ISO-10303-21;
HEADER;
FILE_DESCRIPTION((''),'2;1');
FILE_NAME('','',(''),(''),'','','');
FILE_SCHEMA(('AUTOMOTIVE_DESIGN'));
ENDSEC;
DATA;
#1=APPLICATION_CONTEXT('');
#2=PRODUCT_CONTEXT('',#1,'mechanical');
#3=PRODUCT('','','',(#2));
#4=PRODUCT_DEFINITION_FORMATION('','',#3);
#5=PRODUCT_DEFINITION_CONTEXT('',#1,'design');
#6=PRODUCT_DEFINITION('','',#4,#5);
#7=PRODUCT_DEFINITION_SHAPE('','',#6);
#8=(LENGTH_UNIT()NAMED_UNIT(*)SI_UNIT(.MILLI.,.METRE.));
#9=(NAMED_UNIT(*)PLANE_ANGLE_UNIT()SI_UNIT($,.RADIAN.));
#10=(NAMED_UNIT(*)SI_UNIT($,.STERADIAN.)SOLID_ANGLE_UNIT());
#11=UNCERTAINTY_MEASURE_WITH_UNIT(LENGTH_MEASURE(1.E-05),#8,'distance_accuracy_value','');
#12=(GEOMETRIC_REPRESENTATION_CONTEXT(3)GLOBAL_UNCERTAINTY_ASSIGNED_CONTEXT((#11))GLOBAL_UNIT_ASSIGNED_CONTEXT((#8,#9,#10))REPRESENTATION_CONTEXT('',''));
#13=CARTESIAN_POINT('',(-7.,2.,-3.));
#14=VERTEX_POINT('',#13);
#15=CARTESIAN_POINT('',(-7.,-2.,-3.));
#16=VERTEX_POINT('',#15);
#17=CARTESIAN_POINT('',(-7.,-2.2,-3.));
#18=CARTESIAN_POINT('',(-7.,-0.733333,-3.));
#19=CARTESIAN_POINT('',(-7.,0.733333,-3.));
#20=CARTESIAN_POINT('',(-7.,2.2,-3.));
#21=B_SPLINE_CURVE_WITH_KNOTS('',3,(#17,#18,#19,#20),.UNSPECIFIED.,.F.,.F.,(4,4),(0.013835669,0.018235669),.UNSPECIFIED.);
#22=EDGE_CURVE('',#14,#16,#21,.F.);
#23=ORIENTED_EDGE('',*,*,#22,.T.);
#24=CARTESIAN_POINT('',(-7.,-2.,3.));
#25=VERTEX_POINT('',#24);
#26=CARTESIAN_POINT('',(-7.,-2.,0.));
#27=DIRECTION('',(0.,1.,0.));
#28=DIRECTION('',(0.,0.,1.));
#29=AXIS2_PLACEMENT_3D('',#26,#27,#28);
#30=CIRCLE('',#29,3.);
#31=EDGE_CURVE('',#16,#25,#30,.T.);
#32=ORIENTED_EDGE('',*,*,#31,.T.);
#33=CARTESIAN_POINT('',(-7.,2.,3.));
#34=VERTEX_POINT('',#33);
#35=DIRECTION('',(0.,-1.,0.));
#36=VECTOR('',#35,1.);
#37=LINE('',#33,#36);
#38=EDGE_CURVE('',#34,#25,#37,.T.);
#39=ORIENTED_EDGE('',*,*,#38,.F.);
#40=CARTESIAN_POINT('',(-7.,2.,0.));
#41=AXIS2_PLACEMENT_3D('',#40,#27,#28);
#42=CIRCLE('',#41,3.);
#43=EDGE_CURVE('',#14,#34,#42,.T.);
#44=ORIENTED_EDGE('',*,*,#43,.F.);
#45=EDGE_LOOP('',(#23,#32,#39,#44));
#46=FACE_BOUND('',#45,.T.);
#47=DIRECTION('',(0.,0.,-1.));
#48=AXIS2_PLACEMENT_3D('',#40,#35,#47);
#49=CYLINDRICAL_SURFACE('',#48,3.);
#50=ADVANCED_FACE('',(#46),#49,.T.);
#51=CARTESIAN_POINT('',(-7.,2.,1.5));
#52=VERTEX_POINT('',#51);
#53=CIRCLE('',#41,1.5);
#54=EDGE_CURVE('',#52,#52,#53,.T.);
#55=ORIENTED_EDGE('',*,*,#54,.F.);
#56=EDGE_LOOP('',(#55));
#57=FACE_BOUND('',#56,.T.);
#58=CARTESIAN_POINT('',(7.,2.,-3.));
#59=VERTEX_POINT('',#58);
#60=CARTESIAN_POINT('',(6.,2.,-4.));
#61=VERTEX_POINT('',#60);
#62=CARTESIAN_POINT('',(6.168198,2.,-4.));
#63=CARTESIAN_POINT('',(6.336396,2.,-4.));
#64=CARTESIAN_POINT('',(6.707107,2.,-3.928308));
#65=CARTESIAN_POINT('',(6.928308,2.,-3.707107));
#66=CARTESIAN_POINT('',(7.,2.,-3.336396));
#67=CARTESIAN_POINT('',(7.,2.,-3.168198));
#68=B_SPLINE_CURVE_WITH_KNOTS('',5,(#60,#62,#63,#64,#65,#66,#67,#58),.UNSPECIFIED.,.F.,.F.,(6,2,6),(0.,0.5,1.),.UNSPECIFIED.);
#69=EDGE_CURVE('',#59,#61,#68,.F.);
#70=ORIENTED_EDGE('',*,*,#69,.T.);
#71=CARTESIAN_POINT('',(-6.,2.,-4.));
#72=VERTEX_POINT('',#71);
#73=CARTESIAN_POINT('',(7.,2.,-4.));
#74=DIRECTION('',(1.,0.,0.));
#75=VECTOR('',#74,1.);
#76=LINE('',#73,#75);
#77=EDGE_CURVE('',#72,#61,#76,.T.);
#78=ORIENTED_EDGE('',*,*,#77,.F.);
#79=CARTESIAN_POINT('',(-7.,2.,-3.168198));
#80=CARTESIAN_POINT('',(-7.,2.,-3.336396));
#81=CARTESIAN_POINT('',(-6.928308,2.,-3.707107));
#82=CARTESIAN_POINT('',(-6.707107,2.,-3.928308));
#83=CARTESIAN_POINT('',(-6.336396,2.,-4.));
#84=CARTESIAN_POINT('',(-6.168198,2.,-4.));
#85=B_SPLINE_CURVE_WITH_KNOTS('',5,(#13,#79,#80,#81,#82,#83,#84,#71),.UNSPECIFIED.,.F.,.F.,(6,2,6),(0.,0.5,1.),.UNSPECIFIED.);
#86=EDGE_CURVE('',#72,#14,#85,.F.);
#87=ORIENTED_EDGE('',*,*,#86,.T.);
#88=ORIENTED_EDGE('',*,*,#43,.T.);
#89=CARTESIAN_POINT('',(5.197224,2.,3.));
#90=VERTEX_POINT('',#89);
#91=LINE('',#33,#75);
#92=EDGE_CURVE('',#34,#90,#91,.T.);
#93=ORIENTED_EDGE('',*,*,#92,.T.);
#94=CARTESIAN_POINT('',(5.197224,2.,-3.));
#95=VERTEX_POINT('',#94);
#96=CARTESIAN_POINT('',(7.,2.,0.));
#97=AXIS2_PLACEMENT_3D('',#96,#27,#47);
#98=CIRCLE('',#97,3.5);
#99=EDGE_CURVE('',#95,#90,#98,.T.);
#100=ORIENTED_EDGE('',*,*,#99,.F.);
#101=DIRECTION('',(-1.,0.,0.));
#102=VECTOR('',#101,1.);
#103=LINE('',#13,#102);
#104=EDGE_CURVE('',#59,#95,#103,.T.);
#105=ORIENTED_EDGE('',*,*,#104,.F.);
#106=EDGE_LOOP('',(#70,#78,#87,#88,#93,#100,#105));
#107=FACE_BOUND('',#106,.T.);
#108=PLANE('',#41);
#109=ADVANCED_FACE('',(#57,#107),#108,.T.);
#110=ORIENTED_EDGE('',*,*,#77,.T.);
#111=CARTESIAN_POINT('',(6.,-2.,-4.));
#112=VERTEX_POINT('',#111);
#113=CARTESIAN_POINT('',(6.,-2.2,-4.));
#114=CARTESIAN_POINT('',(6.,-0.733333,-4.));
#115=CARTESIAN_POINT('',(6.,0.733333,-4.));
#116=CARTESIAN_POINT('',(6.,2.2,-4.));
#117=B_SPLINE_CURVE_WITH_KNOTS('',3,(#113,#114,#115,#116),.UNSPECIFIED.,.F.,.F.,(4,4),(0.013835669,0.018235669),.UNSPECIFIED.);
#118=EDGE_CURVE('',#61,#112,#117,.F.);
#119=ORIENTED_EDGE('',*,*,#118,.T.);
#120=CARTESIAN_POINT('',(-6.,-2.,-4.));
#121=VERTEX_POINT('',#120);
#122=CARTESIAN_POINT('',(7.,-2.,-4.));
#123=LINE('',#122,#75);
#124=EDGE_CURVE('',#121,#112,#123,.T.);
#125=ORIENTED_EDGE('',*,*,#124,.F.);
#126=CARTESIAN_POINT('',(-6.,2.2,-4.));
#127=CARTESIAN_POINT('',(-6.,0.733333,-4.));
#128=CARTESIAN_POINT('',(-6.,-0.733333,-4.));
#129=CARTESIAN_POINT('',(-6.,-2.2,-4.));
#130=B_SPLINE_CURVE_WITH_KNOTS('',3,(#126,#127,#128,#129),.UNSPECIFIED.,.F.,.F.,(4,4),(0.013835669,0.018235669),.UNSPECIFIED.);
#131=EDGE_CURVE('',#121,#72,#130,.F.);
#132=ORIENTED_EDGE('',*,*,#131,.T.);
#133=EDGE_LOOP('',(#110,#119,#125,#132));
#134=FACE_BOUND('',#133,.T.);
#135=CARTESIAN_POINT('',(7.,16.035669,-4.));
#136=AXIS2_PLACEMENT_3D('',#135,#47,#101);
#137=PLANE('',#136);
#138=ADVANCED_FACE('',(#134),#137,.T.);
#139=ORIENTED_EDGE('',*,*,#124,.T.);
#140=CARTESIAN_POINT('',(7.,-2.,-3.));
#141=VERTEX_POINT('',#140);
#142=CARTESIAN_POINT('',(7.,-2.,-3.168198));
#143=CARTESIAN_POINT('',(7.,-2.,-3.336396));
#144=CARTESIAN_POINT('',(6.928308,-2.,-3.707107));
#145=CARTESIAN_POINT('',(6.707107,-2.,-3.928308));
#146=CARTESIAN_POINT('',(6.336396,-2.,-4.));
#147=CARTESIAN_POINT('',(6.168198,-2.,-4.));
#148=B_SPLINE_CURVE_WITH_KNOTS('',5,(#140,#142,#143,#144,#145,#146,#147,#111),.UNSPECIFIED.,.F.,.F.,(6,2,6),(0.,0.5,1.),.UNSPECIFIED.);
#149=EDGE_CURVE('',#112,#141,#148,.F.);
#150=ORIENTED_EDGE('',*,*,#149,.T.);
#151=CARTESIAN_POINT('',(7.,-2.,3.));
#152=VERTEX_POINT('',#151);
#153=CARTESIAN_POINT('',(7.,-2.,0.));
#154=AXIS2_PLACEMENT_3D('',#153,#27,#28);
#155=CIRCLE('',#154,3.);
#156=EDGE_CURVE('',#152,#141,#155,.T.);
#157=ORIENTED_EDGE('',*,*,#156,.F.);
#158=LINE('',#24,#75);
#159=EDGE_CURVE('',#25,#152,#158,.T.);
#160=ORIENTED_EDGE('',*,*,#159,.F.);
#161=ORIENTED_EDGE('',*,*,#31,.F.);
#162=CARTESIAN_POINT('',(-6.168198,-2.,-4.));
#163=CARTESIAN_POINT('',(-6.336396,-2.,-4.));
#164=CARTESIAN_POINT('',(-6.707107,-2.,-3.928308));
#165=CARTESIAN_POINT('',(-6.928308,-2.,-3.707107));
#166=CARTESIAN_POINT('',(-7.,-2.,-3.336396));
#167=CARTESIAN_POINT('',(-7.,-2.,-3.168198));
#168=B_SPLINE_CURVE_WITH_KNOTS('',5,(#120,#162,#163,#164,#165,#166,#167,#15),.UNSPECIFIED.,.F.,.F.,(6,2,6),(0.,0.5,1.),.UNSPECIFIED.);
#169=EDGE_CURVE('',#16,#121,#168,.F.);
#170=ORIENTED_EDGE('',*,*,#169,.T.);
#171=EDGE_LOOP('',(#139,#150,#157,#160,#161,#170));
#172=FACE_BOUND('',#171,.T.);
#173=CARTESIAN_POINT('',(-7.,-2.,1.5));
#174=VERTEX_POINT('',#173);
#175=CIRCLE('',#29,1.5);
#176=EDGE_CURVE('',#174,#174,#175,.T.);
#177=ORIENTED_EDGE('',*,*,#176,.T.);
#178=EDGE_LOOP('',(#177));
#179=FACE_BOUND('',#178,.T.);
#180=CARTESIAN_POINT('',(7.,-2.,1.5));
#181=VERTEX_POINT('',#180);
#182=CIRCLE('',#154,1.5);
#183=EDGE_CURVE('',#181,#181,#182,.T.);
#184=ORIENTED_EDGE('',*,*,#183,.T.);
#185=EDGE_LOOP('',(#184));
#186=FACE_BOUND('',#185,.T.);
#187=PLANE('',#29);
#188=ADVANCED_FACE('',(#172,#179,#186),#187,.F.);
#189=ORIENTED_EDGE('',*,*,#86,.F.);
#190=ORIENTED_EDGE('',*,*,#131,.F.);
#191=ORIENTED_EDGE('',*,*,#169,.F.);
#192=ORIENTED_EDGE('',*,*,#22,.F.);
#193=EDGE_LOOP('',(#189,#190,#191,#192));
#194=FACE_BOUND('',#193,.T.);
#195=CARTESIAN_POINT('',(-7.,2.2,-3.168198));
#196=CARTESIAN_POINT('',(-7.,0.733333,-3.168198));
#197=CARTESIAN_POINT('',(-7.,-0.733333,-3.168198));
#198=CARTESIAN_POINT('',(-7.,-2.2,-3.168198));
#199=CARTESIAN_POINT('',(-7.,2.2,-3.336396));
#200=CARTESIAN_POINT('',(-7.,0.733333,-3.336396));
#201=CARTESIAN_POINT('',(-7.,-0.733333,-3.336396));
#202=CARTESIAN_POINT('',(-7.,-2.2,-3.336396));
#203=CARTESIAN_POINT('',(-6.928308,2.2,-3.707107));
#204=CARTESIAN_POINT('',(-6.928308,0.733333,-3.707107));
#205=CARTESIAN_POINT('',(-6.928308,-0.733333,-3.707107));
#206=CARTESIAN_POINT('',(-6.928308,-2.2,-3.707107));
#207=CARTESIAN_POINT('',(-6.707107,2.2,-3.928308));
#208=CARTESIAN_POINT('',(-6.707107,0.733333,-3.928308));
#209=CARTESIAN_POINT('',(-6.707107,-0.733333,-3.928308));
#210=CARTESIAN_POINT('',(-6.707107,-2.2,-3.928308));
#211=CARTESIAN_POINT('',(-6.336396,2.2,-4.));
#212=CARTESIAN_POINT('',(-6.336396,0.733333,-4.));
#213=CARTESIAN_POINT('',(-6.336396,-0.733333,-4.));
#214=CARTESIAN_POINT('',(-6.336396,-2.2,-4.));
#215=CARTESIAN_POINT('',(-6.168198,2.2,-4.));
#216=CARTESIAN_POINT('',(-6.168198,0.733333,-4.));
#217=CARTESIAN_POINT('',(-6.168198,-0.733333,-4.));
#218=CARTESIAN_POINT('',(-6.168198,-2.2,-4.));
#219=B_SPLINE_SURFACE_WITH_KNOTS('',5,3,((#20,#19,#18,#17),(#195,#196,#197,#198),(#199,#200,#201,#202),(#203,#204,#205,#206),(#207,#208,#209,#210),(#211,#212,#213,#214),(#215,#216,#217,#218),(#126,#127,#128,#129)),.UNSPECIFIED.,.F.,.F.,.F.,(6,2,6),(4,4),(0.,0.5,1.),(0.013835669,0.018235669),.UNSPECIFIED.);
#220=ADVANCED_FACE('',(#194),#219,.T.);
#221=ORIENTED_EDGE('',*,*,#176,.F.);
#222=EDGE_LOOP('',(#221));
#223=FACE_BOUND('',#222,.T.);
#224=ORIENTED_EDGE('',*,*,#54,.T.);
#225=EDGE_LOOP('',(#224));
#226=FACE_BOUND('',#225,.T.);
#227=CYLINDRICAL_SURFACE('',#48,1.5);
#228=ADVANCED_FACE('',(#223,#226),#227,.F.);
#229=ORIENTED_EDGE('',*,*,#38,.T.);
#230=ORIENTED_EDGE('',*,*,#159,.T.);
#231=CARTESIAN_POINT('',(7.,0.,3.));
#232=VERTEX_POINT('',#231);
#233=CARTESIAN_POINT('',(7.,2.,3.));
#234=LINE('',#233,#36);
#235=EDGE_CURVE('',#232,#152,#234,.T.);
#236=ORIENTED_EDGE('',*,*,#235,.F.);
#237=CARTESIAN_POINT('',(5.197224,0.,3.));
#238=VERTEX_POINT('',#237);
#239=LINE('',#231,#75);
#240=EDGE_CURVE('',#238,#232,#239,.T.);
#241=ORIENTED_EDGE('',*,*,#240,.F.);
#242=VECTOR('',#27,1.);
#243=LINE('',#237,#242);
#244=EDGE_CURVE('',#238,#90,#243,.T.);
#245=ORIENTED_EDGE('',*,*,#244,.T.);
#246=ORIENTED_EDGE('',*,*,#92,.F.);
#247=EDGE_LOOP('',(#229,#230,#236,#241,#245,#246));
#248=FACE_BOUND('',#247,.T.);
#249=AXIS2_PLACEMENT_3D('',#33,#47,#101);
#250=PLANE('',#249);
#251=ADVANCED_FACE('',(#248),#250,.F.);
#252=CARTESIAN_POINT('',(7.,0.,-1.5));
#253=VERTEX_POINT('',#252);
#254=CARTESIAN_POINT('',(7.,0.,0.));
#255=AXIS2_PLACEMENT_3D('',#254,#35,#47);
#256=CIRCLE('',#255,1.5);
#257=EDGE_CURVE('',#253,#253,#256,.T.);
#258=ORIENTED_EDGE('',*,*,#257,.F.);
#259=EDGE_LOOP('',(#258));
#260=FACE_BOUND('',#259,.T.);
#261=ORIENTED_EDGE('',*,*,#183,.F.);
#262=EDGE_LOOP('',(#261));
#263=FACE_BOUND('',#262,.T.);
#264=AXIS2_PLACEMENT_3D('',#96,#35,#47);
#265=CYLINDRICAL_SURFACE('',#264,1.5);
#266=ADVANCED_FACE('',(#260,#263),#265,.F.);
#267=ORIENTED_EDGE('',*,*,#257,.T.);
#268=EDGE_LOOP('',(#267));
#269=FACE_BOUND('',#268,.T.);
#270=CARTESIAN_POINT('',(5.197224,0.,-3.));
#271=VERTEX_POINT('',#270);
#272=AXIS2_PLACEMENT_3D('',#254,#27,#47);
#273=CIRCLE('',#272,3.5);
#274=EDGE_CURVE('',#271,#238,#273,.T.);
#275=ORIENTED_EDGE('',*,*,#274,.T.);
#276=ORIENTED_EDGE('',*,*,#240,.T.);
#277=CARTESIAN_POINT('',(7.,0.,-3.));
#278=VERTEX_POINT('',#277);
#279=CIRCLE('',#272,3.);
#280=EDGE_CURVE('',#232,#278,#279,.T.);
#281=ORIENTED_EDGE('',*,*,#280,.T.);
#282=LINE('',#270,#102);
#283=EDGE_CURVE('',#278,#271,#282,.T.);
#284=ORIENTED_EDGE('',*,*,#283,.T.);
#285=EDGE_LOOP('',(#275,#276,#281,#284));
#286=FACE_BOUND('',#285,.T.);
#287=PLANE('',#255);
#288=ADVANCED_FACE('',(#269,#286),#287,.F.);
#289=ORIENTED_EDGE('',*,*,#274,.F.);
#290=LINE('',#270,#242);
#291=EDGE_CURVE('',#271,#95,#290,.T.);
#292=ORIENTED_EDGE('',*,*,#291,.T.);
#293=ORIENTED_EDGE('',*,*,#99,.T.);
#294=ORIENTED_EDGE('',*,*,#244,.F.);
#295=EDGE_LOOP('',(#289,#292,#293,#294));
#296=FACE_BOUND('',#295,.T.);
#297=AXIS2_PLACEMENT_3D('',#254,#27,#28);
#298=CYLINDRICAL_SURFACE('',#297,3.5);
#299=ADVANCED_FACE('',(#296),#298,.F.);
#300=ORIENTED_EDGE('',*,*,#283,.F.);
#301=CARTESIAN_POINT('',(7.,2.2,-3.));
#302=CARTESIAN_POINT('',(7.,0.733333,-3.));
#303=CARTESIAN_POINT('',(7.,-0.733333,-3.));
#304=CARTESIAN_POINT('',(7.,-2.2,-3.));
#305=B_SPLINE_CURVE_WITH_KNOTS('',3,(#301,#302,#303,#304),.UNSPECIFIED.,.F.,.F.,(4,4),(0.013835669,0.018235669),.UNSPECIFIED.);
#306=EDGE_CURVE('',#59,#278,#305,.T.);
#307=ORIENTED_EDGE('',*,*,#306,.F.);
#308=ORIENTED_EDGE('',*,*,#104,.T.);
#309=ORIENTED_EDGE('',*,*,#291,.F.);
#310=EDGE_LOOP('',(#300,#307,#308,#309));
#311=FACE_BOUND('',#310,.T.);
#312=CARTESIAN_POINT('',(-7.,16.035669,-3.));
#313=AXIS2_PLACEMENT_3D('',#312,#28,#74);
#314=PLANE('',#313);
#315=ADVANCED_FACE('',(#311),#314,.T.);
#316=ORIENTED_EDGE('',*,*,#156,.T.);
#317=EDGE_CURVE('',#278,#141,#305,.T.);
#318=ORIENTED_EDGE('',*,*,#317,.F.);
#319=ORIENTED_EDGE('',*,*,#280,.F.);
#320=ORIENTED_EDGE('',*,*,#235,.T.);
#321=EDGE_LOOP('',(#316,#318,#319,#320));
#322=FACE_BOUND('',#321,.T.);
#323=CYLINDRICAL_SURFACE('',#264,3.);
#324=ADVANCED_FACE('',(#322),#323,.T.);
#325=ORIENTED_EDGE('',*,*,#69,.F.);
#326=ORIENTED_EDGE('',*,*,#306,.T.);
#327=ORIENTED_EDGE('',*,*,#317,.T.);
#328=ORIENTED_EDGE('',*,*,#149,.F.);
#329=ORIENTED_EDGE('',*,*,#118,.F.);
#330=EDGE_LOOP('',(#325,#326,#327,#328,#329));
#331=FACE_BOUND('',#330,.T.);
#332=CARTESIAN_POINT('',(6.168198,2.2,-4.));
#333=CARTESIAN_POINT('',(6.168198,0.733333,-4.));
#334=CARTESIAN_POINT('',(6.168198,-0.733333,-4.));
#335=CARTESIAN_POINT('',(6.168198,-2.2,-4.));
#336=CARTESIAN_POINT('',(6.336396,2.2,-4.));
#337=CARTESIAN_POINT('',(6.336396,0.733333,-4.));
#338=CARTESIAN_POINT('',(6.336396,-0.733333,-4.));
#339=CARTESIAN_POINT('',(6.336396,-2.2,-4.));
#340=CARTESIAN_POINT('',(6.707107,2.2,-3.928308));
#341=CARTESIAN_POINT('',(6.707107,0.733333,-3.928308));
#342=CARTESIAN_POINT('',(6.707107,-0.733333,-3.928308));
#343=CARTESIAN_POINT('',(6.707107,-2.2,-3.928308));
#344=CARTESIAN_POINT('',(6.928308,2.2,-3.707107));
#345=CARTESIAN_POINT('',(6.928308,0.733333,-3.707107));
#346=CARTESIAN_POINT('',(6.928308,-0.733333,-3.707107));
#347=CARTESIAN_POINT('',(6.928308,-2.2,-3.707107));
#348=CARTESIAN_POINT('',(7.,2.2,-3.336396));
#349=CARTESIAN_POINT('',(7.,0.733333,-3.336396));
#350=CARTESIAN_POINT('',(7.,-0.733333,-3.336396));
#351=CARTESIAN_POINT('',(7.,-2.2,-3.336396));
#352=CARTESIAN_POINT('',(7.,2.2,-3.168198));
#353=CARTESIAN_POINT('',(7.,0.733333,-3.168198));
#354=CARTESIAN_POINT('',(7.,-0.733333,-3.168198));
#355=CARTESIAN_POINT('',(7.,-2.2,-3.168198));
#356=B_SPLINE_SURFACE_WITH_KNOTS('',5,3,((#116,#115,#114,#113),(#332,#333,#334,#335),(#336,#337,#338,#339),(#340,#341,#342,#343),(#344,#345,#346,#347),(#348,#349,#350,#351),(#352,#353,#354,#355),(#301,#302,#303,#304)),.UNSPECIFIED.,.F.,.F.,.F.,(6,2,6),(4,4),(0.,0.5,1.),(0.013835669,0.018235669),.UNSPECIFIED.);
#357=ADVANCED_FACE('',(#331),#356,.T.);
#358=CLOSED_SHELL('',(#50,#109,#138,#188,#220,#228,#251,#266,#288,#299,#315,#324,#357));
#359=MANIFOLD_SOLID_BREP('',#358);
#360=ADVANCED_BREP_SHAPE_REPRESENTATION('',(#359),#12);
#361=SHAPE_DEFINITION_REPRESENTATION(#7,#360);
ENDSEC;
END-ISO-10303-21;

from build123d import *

# Parameters (mm, degrees)
SKETCH1_R           = 1.5
BOSS_EXTRUDE1_DEPTH = 2
CUT_EXTRUDE1_DEPTH  = 2
BOSS_EXTRUDE2_REACH = 13.18
SKETCH3_W           = 14
SKETCH3_H           = 1
FILLET1_SIZE        = 1


with BuildPart() as part:
    # Sketch1 → Boss-Extrude1 (new, symmetric)
    with BuildSketch(Plane(origin=(0, 0, 0), x_dir=(1, 0, 0), z_dir=(0, 1, 0))):
        with BuildLine():
            Line((-7, 3), (7, 3))
            ThreePointArc((7, 3), (10, 0), (7, -3))
            Line((7, -3), (-7, -3))
            ThreePointArc((-7, -3), (-10, 0), (-7, 3))
        make_face()
        with Locations(Location((-7, 0, 0), (0, 0, 270))):
            Circle(SKETCH1_R, mode=Mode.SUBTRACT)
        with Locations(Location((7, 0, 0), (0, 0, 270))):
            Circle(SKETCH1_R, mode=Mode.SUBTRACT)
    extrude(amount=BOSS_EXTRUDE1_DEPTH, both=True)

    # Sketch2 → Cut-Extrude1 (cut)
    with BuildSketch(Plane(origin=(0, 2, 0), x_dir=(1, 0, 0), z_dir=(0, 1, 0))):
        with BuildLine():
            Line((5.197224362, 3), (7, 3))
            ThreePointArc((7, 3), (10, 0), (7, -3))
            Line((7, -3), (5.197224362, -3))
            ThreePointArc((5.197224362, -3), (3.5, 0), (5.197224362, 3))
        make_face()
    extrude(amount=-CUT_EXTRUDE1_DEPTH, mode=Mode.SUBTRACT)

    # Boss-Extrude2: up to this face of the body (flat: up to its plane)
    boss_extrude2_end = Plane(part.part.faces().sort_by_distance((-2.270949872, 2, 0))[0])
    # Sketch3 → Boss-Extrude2 (add, up to the picked face)
    with BuildSketch(Plane.XZ.offset(2), mode=Mode.PRIVATE) as boss_extrude2_sk1:
        with Locations((0, -3.5)):
            Rectangle(SKETCH3_W, SKETCH3_H)
    boss_extrude2_tool1 = split(extrude(boss_extrude2_sk1.sketch, amount=-BOSS_EXTRUDE2_REACH, mode=Mode.PRIVATE), bisect_by=boss_extrude2_end, keep=Keep.BOTH, mode=Mode.PRIVATE)
    add(boss_extrude2_tool1.solids().sort_by(Axis((0, -2, -3.5), (0, 1, 0)))[0])

    # Fillet1
    # a fillet whose section is not a circle: 1 mm, written as the material it takes off along each edge
    with BuildSketch(Plane(origin=(7, -4.5, -4), x_dir=(0, 0, 1), z_dir=(0, 1, 0)), Plane(origin=(-7, -4.5, -4), x_dir=(1, 0, 0), z_dir=(0, 1, 0))) as fillet1_piece_1:
        with BuildLine():
            add(Edge.make_bspline([(FILLET1_SIZE, 0), (FILLET1_SIZE * 0.831801948466, 0), (FILLET1_SIZE * 0.663603896932, 0), (FILLET1_SIZE * 0.292893218813, -FILLET1_SIZE * 0.0716919198361), (FILLET1_SIZE * 0.0716919198361, -FILLET1_SIZE * 0.292893218813), (0, -FILLET1_SIZE * 0.663603896932), (0, -FILLET1_SIZE * 0.831801948466), (0, -FILLET1_SIZE)], knots=[0, 0, 0, 0, 0, 0, 0.5, 0.5, 1, 1, 1, 1, 1, 1], degree=5))
            Line((0, -FILLET1_SIZE), (0, 0))
            Line((0, 0), (FILLET1_SIZE, 0))
        make_face()
    extrude(amount=9, mode=Mode.SUBTRACT)


solid = part.part
